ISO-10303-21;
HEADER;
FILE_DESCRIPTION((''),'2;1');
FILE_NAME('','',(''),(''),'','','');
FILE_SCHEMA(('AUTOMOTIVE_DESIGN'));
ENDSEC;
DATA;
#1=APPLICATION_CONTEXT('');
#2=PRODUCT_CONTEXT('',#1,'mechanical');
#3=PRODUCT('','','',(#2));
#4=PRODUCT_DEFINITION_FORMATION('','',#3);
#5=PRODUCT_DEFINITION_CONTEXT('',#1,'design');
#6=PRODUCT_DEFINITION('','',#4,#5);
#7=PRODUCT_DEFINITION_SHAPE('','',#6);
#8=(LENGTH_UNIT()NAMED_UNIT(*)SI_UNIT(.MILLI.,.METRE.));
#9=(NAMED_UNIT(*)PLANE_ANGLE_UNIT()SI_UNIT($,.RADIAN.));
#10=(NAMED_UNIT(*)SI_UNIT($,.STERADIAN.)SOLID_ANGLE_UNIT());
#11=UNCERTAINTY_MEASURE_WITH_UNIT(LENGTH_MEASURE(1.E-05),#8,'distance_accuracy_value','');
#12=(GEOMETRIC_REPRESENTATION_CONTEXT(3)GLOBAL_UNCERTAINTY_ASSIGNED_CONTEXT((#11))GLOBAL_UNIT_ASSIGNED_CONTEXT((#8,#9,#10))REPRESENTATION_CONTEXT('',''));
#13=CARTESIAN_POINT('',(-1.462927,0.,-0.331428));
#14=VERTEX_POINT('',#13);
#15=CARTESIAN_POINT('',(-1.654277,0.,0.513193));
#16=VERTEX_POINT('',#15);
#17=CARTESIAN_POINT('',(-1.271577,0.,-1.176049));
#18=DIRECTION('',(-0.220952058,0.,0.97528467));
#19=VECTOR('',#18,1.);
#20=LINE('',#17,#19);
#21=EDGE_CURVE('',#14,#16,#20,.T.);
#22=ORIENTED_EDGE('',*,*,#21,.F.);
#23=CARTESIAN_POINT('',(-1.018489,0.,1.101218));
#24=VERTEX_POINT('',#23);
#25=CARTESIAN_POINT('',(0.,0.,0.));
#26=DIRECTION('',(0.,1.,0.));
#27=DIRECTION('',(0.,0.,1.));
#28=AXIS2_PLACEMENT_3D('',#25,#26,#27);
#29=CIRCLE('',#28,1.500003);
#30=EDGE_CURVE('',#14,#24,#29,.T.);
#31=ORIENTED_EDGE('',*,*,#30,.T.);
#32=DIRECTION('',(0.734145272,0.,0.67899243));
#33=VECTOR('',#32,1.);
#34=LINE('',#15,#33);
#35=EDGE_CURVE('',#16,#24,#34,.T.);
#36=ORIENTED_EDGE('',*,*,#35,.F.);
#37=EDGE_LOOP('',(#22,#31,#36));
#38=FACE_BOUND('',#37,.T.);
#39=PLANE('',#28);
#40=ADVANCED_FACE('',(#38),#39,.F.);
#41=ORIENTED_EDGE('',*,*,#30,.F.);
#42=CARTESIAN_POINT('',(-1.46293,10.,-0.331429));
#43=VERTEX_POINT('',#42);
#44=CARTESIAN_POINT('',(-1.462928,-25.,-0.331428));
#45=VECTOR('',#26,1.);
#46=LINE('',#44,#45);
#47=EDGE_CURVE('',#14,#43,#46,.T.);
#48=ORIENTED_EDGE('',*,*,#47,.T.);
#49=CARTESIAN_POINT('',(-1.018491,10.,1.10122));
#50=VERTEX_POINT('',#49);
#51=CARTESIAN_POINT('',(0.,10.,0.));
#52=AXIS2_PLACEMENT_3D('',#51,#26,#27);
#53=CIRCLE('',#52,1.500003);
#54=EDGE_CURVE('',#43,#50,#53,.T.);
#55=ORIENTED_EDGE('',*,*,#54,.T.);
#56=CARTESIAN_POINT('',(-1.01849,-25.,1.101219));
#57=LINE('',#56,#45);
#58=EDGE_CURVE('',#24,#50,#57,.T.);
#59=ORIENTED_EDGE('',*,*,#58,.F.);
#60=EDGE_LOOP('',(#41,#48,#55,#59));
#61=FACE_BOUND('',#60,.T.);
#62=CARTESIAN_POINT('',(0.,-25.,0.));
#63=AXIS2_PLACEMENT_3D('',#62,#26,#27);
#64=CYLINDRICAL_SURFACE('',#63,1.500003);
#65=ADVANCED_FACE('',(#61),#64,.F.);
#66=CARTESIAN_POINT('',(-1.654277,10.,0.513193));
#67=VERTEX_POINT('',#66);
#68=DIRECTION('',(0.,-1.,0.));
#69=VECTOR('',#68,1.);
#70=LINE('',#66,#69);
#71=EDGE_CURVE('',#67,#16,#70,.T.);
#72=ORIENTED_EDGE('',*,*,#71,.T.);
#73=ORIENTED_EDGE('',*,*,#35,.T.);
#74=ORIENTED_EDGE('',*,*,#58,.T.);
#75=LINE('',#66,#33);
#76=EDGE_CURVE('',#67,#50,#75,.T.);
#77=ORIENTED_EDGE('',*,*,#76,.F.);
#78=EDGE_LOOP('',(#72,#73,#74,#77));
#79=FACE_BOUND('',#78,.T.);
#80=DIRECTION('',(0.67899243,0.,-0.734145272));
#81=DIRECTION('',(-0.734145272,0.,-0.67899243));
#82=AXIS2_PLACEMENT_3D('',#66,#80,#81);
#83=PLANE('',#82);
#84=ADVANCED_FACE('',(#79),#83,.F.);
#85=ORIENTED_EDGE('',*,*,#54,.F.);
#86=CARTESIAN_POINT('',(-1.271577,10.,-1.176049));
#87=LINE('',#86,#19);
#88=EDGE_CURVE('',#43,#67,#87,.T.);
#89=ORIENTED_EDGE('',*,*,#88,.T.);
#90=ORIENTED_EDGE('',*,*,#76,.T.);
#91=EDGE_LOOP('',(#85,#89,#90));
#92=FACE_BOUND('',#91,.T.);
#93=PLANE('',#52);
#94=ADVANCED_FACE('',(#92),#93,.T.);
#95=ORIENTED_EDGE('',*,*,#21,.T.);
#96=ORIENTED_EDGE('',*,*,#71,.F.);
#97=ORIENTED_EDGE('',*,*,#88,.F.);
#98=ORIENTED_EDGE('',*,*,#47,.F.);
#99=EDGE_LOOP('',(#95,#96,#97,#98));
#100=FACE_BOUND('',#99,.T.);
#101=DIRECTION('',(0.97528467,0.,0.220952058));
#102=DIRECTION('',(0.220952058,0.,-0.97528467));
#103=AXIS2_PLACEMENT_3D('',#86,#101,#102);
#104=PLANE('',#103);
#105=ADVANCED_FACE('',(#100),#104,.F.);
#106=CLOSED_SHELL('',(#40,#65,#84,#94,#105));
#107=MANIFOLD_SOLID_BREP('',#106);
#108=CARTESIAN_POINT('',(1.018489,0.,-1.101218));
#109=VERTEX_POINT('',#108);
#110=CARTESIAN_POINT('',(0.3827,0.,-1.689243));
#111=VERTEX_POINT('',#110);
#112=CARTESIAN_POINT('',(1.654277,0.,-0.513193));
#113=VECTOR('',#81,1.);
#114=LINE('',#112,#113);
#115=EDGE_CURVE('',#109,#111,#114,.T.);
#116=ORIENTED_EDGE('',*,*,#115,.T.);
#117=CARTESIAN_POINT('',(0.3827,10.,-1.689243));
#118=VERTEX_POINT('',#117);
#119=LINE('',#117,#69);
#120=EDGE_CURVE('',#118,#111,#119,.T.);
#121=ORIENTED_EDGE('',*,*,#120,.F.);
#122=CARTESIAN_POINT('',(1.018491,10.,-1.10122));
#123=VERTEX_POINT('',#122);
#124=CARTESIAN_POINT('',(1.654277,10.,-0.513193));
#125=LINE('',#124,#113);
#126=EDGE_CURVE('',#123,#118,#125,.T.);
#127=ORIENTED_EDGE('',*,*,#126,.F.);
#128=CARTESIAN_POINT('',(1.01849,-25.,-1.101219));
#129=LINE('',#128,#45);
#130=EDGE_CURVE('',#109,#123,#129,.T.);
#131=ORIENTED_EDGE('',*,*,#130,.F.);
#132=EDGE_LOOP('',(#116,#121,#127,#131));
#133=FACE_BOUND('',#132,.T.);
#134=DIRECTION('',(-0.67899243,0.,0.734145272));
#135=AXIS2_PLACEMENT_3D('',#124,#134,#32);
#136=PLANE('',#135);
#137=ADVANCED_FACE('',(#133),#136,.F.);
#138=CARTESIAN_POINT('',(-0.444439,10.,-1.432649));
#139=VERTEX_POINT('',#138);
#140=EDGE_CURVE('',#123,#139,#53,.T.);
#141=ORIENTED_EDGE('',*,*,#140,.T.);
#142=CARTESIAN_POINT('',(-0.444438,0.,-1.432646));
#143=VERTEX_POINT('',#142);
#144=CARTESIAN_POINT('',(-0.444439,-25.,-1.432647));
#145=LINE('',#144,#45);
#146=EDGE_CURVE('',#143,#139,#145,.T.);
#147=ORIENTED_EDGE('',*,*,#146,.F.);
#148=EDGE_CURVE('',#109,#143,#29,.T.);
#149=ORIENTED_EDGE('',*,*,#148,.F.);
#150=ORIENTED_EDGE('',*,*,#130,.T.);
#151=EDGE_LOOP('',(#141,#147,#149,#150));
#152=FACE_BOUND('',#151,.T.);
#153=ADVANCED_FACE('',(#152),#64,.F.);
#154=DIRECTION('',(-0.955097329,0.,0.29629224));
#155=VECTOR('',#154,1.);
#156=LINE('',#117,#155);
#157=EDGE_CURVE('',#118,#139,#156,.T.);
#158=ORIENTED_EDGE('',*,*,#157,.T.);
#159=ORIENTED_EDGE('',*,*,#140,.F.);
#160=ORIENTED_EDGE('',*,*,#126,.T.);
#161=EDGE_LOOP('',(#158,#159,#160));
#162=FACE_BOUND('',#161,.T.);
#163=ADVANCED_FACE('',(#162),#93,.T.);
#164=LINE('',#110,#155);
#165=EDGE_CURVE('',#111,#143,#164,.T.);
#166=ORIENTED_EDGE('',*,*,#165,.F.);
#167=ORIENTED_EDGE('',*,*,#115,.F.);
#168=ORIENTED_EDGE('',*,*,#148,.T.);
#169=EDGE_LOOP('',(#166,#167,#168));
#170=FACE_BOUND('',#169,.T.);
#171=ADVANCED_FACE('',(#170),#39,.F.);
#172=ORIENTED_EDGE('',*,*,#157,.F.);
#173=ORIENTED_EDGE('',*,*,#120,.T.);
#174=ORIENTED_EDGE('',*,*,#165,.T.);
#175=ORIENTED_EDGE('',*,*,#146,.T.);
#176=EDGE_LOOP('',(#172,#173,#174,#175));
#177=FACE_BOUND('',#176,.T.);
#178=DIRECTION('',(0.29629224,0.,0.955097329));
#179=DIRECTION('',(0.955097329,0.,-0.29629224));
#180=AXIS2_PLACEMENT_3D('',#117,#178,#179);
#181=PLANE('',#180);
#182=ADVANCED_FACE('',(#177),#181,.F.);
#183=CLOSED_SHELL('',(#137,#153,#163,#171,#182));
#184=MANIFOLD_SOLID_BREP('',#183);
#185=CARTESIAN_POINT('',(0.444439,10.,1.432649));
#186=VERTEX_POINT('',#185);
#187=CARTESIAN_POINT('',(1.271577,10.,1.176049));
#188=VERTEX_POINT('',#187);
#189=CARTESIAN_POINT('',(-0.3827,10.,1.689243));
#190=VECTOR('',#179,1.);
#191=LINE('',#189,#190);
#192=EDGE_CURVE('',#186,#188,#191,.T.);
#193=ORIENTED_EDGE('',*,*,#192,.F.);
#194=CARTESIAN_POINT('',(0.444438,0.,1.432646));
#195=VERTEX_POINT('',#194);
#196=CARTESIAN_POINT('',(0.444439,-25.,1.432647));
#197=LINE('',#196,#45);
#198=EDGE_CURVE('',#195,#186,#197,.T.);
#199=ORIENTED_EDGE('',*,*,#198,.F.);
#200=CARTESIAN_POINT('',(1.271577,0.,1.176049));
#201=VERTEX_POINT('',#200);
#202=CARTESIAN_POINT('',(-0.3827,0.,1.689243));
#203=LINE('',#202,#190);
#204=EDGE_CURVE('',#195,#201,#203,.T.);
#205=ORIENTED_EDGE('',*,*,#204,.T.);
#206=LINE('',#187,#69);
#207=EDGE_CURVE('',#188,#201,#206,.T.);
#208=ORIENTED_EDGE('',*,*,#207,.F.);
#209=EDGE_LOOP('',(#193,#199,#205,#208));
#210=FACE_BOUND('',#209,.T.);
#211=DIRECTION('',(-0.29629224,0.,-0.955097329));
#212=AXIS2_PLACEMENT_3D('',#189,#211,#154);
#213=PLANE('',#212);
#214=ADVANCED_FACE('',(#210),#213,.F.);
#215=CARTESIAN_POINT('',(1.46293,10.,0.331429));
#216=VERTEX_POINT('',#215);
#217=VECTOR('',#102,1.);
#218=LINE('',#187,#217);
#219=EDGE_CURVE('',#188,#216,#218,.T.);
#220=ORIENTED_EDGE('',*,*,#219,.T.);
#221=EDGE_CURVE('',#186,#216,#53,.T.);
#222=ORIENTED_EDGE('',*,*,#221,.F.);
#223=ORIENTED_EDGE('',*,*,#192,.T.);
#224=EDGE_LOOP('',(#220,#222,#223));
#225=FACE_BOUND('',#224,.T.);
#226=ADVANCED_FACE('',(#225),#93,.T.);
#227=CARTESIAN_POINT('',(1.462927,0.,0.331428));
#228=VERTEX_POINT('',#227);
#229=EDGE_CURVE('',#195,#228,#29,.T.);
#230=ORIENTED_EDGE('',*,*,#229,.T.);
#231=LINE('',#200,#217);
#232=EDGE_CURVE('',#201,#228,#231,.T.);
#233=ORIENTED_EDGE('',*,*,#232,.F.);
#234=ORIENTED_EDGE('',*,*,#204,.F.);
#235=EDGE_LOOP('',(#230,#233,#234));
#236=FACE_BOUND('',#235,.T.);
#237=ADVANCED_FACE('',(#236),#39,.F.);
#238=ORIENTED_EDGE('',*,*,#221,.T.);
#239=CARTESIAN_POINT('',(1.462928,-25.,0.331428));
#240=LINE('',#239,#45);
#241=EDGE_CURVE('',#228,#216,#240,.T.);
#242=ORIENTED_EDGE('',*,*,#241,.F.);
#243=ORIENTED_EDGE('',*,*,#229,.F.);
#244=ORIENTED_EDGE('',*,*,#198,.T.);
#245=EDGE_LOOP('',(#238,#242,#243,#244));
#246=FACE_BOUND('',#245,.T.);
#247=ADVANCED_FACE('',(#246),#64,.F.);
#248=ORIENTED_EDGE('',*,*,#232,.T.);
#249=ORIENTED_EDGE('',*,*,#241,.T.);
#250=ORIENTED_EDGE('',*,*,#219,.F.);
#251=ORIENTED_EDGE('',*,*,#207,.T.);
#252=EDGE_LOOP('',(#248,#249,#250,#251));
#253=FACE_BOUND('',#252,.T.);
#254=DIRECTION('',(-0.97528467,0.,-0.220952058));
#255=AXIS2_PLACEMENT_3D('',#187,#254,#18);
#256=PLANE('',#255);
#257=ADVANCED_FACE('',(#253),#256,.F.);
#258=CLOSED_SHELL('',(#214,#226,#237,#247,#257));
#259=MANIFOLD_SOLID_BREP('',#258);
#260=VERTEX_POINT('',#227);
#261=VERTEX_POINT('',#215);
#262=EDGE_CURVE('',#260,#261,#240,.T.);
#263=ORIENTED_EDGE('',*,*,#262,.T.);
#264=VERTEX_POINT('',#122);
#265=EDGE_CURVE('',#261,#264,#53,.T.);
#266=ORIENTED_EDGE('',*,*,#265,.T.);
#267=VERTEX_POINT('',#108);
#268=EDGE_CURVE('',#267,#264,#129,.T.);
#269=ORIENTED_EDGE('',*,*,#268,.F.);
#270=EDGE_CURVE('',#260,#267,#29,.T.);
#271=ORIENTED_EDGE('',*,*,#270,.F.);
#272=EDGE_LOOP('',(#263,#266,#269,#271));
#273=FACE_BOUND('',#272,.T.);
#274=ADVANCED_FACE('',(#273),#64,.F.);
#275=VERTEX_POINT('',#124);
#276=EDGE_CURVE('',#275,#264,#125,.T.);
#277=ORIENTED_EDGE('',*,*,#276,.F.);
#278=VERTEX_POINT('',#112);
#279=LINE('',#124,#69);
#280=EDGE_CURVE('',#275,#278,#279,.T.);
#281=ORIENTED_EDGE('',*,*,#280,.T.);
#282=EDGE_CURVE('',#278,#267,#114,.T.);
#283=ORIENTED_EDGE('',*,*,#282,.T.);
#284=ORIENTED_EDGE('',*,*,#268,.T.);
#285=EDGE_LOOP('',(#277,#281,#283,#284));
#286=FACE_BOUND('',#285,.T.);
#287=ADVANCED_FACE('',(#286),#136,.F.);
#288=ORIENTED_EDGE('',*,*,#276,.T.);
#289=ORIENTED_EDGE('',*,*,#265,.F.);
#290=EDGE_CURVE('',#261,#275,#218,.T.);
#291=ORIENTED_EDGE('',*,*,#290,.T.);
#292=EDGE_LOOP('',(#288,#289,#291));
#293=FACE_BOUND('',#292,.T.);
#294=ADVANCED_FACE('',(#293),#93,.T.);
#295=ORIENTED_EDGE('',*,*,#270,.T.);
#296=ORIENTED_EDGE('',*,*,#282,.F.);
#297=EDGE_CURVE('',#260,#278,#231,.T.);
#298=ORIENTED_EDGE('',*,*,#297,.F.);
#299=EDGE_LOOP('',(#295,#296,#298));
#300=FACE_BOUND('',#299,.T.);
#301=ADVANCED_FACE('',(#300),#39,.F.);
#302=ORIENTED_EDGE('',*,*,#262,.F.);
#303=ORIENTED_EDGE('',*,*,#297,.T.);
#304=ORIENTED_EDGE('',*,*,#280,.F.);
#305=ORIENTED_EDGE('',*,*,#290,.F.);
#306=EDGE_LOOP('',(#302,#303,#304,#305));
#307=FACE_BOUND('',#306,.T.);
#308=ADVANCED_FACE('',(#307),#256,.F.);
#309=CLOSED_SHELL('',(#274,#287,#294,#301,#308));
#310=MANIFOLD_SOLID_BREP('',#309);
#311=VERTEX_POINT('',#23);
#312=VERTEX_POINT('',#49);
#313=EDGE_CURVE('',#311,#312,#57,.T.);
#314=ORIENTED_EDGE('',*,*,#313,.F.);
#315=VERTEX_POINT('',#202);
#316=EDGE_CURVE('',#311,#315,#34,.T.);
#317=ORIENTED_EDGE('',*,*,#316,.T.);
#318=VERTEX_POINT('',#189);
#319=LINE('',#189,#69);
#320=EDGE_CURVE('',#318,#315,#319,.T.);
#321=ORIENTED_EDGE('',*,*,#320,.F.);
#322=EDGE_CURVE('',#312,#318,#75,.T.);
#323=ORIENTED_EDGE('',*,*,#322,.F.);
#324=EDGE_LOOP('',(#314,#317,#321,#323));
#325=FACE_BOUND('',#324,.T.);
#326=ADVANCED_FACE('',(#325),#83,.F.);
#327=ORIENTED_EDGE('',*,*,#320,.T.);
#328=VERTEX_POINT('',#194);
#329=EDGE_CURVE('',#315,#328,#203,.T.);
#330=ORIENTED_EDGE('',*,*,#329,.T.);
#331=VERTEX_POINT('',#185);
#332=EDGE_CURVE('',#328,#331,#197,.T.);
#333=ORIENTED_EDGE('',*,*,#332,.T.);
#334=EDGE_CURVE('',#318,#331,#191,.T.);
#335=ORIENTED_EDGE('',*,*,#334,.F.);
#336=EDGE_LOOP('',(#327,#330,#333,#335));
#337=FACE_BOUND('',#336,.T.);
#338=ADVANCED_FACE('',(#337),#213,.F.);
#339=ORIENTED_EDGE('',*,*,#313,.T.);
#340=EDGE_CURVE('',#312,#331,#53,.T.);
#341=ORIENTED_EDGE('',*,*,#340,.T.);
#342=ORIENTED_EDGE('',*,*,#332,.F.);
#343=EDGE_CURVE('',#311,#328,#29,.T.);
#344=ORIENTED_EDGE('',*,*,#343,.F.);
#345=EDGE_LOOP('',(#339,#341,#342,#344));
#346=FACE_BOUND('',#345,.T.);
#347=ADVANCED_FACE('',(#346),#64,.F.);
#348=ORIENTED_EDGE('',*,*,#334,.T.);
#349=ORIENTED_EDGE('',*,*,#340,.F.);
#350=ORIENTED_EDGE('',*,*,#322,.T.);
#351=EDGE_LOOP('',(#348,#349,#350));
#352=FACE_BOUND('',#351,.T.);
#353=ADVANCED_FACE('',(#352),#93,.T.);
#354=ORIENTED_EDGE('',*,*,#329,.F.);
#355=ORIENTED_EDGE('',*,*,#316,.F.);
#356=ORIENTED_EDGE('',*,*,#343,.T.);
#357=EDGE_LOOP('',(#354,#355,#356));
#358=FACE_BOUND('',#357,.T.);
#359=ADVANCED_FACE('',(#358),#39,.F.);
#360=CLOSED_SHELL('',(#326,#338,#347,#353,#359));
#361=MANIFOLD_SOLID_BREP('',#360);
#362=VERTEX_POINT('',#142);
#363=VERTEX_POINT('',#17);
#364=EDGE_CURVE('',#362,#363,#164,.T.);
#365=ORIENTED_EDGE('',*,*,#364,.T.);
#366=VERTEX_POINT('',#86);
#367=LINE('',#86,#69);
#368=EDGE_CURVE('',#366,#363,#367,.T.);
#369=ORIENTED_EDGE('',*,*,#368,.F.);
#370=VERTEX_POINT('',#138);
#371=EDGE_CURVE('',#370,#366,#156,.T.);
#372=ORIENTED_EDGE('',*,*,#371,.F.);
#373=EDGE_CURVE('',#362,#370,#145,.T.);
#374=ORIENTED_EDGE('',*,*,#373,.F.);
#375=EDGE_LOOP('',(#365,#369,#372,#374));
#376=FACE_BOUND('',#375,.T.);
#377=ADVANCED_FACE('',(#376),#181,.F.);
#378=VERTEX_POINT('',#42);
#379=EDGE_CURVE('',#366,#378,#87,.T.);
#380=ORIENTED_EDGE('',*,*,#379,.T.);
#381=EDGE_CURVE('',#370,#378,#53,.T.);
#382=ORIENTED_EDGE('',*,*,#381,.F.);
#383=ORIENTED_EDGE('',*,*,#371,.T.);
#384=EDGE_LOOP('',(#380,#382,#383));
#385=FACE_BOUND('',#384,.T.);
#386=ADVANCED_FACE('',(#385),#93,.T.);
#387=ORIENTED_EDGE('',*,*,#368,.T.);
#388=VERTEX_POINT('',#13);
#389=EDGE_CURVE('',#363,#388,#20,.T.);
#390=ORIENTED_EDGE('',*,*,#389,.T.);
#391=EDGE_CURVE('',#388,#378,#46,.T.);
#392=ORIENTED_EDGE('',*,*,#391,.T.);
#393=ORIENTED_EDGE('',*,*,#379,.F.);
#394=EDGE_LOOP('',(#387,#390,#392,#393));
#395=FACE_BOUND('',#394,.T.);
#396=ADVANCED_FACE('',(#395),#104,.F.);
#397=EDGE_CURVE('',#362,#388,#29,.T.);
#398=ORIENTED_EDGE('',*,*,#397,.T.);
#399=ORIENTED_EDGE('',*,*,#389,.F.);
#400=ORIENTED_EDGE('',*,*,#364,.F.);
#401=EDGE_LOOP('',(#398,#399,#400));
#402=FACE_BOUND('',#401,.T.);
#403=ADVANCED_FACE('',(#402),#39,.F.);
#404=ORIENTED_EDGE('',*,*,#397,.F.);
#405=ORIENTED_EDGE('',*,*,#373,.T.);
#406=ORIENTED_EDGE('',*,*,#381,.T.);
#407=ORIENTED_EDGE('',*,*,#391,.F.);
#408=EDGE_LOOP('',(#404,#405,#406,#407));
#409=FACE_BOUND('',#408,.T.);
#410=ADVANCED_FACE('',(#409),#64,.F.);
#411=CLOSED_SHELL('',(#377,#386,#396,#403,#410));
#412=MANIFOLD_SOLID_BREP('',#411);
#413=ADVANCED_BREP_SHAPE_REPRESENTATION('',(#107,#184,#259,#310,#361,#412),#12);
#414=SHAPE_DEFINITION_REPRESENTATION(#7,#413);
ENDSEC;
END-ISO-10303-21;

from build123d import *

# Parameters (mm, degrees)
BOSS_EXTRUDE1_DEPTH  = 10
CUT_EXTRUDE1_START   = -10
CUT_EXTRUDE1_DEPTH   = 10
CUT_EXTRUDE1_2_DEPTH = 10
CUT_EXTRUDE1_3_DEPTH = 10
CUT_EXTRUDE1_4_DEPTH = 10
CUT_EXTRUDE1_5_DEPTH = 10
CUT_EXTRUDE1_6_DEPTH = 10


# Read off the part's stored shape, not the designer's step: Cut-Extrude1
with BuildPart() as part:
    # Sketch1 → Boss-Extrude1 (new body)
    with BuildSketch(Plane(origin=(0, 0, 0), x_dir=(1, 0, 0), z_dir=(0, 1, 0))):
        Polygon((1.271576911, -1.176049387), (1.6542771, 0.513193214), (0.38270019, 1.689242601), (-1.271576911, 1.176049387), (-1.6542771, -0.513193214), (-0.38270019, -1.689242601), align=None)
    extrude(amount=BOSS_EXTRUDE1_DEPTH)

    # Cut-Extrude1 6 outline → Cut-Extrude1 6 (cut)
    with BuildSketch(Plane(origin=(0, 10, 0), x_dir=(1, 0, 0), z_dir=(0, 1, 0)).offset(CUT_EXTRUDE1_START)):
        with BuildLine():
            Line((1.271576911, -1.176049387), (1.462929782, -0.331428716))
            ThreePointArc((1.462929782, -0.331428716), (1.432648713, 0.444439204), (1.018490579, 1.101219998))
            Line((1.018490579, 1.101219998), (0.38270019, 1.689242601))
            Line((0.38270019, 1.689242601), (-1.271576911, 1.176049387))
            Line((-1.271576911, 1.176049387), (-1.6542771, -0.513193214))
            Line((-1.6542771, -0.513193214), (-0.38270019, -1.689242601))
            Line((-0.38270019, -1.689242601), (1.271576911, -1.176049387))
        make_face()
    extrude(amount=CUT_EXTRUDE1_6_DEPTH, mode=Mode.SUBTRACT)


with BuildPart() as body_2:
    # Cut-Extrude1 outline → Cut-Extrude1 (new body)
    with BuildSketch(Plane(origin=(0, 10, 0), x_dir=(1, 0, 0), z_dir=(0, 1, 0)).offset(CUT_EXTRUDE1_START)):
        with BuildLine():
            Line((0.444439204, -1.432648713), (1.271576911, -1.176049387))
            Line((1.271576911, -1.176049387), (1.462929782, -0.331428716))
            ThreePointArc((1.462929782, -0.331428716), (1.101219998, -1.018490579), (0.444439204, -1.432648713))
        make_face()
    extrude(amount=CUT_EXTRUDE1_DEPTH)


with BuildPart() as body_3:
    # Cut-Extrude1 2 outline → Cut-Extrude1 2 (new body)
    with BuildSketch(Plane(origin=(0, 10, 0), x_dir=(1, 0, 0), z_dir=(0, 1, 0)).offset(CUT_EXTRUDE1_START)):
        with BuildLine():
            Line((-1.018490579, -1.101219998), (-0.38270019, -1.689242601))
            Line((-0.38270019, -1.689242601), (0.444439204, -1.432648713))
            ThreePointArc((0.444439204, -1.432648713), (-0.331428716, -1.462929782), (-1.018490579, -1.101219998))
        make_face()
    extrude(amount=CUT_EXTRUDE1_2_DEPTH)


with BuildPart() as body_4:
    # Cut-Extrude1 3 outline → Cut-Extrude1 3 (new body)
    with BuildSketch(Plane(origin=(0, 10, 0), x_dir=(1, 0, 0), z_dir=(0, 1, 0)).offset(CUT_EXTRUDE1_START)):
        with BuildLine():
            Line((-1.6542771, -0.513193214), (-1.018490579, -1.101219998))
            ThreePointArc((-1.018490579, -1.101219998), (-1.432648713, -0.444439204), (-1.462929782, 0.331428716))
            Line((-1.462929782, 0.331428716), (-1.6542771, -0.513193214))
        make_face()
    extrude(amount=CUT_EXTRUDE1_3_DEPTH)


with BuildPart() as body_5:
    # Cut-Extrude1 4 outline → Cut-Extrude1 4 (new body)
    with BuildSketch(Plane(origin=(0, 10, 0), x_dir=(1, 0, 0), z_dir=(0, 1, 0)).offset(CUT_EXTRUDE1_START)):
        with BuildLine():
            Line((-1.271576911, 1.176049387), (-1.462929782, 0.331428716))
            ThreePointArc((-1.462929782, 0.331428716), (-1.101219998, 1.018490579), (-0.444439204, 1.432648713))
            Line((-0.444439204, 1.432648713), (-1.271576911, 1.176049387))
        make_face()
    extrude(amount=CUT_EXTRUDE1_4_DEPTH)


with BuildPart() as body_6:
    # Cut-Extrude1 5 outline → Cut-Extrude1 5 (new body)
    with BuildSketch(Plane(origin=(0, 10, 0), x_dir=(1, 0, 0), z_dir=(0, 1, 0)).offset(CUT_EXTRUDE1_START)):
        with BuildLine():
            Line((0.38270019, 1.689242601), (-0.444439204, 1.432648713))
            ThreePointArc((-0.444439204, 1.432648713), (0.331428716, 1.462929782), (1.018490579, 1.101219998))
            Line((1.018490579, 1.101219998), (0.38270019, 1.689242601))
        make_face()
    extrude(amount=CUT_EXTRUDE1_5_DEPTH)


solid = Compound([part.part, body_2.part, body_3.part, body_4.part, body_5.part, body_6.part])
